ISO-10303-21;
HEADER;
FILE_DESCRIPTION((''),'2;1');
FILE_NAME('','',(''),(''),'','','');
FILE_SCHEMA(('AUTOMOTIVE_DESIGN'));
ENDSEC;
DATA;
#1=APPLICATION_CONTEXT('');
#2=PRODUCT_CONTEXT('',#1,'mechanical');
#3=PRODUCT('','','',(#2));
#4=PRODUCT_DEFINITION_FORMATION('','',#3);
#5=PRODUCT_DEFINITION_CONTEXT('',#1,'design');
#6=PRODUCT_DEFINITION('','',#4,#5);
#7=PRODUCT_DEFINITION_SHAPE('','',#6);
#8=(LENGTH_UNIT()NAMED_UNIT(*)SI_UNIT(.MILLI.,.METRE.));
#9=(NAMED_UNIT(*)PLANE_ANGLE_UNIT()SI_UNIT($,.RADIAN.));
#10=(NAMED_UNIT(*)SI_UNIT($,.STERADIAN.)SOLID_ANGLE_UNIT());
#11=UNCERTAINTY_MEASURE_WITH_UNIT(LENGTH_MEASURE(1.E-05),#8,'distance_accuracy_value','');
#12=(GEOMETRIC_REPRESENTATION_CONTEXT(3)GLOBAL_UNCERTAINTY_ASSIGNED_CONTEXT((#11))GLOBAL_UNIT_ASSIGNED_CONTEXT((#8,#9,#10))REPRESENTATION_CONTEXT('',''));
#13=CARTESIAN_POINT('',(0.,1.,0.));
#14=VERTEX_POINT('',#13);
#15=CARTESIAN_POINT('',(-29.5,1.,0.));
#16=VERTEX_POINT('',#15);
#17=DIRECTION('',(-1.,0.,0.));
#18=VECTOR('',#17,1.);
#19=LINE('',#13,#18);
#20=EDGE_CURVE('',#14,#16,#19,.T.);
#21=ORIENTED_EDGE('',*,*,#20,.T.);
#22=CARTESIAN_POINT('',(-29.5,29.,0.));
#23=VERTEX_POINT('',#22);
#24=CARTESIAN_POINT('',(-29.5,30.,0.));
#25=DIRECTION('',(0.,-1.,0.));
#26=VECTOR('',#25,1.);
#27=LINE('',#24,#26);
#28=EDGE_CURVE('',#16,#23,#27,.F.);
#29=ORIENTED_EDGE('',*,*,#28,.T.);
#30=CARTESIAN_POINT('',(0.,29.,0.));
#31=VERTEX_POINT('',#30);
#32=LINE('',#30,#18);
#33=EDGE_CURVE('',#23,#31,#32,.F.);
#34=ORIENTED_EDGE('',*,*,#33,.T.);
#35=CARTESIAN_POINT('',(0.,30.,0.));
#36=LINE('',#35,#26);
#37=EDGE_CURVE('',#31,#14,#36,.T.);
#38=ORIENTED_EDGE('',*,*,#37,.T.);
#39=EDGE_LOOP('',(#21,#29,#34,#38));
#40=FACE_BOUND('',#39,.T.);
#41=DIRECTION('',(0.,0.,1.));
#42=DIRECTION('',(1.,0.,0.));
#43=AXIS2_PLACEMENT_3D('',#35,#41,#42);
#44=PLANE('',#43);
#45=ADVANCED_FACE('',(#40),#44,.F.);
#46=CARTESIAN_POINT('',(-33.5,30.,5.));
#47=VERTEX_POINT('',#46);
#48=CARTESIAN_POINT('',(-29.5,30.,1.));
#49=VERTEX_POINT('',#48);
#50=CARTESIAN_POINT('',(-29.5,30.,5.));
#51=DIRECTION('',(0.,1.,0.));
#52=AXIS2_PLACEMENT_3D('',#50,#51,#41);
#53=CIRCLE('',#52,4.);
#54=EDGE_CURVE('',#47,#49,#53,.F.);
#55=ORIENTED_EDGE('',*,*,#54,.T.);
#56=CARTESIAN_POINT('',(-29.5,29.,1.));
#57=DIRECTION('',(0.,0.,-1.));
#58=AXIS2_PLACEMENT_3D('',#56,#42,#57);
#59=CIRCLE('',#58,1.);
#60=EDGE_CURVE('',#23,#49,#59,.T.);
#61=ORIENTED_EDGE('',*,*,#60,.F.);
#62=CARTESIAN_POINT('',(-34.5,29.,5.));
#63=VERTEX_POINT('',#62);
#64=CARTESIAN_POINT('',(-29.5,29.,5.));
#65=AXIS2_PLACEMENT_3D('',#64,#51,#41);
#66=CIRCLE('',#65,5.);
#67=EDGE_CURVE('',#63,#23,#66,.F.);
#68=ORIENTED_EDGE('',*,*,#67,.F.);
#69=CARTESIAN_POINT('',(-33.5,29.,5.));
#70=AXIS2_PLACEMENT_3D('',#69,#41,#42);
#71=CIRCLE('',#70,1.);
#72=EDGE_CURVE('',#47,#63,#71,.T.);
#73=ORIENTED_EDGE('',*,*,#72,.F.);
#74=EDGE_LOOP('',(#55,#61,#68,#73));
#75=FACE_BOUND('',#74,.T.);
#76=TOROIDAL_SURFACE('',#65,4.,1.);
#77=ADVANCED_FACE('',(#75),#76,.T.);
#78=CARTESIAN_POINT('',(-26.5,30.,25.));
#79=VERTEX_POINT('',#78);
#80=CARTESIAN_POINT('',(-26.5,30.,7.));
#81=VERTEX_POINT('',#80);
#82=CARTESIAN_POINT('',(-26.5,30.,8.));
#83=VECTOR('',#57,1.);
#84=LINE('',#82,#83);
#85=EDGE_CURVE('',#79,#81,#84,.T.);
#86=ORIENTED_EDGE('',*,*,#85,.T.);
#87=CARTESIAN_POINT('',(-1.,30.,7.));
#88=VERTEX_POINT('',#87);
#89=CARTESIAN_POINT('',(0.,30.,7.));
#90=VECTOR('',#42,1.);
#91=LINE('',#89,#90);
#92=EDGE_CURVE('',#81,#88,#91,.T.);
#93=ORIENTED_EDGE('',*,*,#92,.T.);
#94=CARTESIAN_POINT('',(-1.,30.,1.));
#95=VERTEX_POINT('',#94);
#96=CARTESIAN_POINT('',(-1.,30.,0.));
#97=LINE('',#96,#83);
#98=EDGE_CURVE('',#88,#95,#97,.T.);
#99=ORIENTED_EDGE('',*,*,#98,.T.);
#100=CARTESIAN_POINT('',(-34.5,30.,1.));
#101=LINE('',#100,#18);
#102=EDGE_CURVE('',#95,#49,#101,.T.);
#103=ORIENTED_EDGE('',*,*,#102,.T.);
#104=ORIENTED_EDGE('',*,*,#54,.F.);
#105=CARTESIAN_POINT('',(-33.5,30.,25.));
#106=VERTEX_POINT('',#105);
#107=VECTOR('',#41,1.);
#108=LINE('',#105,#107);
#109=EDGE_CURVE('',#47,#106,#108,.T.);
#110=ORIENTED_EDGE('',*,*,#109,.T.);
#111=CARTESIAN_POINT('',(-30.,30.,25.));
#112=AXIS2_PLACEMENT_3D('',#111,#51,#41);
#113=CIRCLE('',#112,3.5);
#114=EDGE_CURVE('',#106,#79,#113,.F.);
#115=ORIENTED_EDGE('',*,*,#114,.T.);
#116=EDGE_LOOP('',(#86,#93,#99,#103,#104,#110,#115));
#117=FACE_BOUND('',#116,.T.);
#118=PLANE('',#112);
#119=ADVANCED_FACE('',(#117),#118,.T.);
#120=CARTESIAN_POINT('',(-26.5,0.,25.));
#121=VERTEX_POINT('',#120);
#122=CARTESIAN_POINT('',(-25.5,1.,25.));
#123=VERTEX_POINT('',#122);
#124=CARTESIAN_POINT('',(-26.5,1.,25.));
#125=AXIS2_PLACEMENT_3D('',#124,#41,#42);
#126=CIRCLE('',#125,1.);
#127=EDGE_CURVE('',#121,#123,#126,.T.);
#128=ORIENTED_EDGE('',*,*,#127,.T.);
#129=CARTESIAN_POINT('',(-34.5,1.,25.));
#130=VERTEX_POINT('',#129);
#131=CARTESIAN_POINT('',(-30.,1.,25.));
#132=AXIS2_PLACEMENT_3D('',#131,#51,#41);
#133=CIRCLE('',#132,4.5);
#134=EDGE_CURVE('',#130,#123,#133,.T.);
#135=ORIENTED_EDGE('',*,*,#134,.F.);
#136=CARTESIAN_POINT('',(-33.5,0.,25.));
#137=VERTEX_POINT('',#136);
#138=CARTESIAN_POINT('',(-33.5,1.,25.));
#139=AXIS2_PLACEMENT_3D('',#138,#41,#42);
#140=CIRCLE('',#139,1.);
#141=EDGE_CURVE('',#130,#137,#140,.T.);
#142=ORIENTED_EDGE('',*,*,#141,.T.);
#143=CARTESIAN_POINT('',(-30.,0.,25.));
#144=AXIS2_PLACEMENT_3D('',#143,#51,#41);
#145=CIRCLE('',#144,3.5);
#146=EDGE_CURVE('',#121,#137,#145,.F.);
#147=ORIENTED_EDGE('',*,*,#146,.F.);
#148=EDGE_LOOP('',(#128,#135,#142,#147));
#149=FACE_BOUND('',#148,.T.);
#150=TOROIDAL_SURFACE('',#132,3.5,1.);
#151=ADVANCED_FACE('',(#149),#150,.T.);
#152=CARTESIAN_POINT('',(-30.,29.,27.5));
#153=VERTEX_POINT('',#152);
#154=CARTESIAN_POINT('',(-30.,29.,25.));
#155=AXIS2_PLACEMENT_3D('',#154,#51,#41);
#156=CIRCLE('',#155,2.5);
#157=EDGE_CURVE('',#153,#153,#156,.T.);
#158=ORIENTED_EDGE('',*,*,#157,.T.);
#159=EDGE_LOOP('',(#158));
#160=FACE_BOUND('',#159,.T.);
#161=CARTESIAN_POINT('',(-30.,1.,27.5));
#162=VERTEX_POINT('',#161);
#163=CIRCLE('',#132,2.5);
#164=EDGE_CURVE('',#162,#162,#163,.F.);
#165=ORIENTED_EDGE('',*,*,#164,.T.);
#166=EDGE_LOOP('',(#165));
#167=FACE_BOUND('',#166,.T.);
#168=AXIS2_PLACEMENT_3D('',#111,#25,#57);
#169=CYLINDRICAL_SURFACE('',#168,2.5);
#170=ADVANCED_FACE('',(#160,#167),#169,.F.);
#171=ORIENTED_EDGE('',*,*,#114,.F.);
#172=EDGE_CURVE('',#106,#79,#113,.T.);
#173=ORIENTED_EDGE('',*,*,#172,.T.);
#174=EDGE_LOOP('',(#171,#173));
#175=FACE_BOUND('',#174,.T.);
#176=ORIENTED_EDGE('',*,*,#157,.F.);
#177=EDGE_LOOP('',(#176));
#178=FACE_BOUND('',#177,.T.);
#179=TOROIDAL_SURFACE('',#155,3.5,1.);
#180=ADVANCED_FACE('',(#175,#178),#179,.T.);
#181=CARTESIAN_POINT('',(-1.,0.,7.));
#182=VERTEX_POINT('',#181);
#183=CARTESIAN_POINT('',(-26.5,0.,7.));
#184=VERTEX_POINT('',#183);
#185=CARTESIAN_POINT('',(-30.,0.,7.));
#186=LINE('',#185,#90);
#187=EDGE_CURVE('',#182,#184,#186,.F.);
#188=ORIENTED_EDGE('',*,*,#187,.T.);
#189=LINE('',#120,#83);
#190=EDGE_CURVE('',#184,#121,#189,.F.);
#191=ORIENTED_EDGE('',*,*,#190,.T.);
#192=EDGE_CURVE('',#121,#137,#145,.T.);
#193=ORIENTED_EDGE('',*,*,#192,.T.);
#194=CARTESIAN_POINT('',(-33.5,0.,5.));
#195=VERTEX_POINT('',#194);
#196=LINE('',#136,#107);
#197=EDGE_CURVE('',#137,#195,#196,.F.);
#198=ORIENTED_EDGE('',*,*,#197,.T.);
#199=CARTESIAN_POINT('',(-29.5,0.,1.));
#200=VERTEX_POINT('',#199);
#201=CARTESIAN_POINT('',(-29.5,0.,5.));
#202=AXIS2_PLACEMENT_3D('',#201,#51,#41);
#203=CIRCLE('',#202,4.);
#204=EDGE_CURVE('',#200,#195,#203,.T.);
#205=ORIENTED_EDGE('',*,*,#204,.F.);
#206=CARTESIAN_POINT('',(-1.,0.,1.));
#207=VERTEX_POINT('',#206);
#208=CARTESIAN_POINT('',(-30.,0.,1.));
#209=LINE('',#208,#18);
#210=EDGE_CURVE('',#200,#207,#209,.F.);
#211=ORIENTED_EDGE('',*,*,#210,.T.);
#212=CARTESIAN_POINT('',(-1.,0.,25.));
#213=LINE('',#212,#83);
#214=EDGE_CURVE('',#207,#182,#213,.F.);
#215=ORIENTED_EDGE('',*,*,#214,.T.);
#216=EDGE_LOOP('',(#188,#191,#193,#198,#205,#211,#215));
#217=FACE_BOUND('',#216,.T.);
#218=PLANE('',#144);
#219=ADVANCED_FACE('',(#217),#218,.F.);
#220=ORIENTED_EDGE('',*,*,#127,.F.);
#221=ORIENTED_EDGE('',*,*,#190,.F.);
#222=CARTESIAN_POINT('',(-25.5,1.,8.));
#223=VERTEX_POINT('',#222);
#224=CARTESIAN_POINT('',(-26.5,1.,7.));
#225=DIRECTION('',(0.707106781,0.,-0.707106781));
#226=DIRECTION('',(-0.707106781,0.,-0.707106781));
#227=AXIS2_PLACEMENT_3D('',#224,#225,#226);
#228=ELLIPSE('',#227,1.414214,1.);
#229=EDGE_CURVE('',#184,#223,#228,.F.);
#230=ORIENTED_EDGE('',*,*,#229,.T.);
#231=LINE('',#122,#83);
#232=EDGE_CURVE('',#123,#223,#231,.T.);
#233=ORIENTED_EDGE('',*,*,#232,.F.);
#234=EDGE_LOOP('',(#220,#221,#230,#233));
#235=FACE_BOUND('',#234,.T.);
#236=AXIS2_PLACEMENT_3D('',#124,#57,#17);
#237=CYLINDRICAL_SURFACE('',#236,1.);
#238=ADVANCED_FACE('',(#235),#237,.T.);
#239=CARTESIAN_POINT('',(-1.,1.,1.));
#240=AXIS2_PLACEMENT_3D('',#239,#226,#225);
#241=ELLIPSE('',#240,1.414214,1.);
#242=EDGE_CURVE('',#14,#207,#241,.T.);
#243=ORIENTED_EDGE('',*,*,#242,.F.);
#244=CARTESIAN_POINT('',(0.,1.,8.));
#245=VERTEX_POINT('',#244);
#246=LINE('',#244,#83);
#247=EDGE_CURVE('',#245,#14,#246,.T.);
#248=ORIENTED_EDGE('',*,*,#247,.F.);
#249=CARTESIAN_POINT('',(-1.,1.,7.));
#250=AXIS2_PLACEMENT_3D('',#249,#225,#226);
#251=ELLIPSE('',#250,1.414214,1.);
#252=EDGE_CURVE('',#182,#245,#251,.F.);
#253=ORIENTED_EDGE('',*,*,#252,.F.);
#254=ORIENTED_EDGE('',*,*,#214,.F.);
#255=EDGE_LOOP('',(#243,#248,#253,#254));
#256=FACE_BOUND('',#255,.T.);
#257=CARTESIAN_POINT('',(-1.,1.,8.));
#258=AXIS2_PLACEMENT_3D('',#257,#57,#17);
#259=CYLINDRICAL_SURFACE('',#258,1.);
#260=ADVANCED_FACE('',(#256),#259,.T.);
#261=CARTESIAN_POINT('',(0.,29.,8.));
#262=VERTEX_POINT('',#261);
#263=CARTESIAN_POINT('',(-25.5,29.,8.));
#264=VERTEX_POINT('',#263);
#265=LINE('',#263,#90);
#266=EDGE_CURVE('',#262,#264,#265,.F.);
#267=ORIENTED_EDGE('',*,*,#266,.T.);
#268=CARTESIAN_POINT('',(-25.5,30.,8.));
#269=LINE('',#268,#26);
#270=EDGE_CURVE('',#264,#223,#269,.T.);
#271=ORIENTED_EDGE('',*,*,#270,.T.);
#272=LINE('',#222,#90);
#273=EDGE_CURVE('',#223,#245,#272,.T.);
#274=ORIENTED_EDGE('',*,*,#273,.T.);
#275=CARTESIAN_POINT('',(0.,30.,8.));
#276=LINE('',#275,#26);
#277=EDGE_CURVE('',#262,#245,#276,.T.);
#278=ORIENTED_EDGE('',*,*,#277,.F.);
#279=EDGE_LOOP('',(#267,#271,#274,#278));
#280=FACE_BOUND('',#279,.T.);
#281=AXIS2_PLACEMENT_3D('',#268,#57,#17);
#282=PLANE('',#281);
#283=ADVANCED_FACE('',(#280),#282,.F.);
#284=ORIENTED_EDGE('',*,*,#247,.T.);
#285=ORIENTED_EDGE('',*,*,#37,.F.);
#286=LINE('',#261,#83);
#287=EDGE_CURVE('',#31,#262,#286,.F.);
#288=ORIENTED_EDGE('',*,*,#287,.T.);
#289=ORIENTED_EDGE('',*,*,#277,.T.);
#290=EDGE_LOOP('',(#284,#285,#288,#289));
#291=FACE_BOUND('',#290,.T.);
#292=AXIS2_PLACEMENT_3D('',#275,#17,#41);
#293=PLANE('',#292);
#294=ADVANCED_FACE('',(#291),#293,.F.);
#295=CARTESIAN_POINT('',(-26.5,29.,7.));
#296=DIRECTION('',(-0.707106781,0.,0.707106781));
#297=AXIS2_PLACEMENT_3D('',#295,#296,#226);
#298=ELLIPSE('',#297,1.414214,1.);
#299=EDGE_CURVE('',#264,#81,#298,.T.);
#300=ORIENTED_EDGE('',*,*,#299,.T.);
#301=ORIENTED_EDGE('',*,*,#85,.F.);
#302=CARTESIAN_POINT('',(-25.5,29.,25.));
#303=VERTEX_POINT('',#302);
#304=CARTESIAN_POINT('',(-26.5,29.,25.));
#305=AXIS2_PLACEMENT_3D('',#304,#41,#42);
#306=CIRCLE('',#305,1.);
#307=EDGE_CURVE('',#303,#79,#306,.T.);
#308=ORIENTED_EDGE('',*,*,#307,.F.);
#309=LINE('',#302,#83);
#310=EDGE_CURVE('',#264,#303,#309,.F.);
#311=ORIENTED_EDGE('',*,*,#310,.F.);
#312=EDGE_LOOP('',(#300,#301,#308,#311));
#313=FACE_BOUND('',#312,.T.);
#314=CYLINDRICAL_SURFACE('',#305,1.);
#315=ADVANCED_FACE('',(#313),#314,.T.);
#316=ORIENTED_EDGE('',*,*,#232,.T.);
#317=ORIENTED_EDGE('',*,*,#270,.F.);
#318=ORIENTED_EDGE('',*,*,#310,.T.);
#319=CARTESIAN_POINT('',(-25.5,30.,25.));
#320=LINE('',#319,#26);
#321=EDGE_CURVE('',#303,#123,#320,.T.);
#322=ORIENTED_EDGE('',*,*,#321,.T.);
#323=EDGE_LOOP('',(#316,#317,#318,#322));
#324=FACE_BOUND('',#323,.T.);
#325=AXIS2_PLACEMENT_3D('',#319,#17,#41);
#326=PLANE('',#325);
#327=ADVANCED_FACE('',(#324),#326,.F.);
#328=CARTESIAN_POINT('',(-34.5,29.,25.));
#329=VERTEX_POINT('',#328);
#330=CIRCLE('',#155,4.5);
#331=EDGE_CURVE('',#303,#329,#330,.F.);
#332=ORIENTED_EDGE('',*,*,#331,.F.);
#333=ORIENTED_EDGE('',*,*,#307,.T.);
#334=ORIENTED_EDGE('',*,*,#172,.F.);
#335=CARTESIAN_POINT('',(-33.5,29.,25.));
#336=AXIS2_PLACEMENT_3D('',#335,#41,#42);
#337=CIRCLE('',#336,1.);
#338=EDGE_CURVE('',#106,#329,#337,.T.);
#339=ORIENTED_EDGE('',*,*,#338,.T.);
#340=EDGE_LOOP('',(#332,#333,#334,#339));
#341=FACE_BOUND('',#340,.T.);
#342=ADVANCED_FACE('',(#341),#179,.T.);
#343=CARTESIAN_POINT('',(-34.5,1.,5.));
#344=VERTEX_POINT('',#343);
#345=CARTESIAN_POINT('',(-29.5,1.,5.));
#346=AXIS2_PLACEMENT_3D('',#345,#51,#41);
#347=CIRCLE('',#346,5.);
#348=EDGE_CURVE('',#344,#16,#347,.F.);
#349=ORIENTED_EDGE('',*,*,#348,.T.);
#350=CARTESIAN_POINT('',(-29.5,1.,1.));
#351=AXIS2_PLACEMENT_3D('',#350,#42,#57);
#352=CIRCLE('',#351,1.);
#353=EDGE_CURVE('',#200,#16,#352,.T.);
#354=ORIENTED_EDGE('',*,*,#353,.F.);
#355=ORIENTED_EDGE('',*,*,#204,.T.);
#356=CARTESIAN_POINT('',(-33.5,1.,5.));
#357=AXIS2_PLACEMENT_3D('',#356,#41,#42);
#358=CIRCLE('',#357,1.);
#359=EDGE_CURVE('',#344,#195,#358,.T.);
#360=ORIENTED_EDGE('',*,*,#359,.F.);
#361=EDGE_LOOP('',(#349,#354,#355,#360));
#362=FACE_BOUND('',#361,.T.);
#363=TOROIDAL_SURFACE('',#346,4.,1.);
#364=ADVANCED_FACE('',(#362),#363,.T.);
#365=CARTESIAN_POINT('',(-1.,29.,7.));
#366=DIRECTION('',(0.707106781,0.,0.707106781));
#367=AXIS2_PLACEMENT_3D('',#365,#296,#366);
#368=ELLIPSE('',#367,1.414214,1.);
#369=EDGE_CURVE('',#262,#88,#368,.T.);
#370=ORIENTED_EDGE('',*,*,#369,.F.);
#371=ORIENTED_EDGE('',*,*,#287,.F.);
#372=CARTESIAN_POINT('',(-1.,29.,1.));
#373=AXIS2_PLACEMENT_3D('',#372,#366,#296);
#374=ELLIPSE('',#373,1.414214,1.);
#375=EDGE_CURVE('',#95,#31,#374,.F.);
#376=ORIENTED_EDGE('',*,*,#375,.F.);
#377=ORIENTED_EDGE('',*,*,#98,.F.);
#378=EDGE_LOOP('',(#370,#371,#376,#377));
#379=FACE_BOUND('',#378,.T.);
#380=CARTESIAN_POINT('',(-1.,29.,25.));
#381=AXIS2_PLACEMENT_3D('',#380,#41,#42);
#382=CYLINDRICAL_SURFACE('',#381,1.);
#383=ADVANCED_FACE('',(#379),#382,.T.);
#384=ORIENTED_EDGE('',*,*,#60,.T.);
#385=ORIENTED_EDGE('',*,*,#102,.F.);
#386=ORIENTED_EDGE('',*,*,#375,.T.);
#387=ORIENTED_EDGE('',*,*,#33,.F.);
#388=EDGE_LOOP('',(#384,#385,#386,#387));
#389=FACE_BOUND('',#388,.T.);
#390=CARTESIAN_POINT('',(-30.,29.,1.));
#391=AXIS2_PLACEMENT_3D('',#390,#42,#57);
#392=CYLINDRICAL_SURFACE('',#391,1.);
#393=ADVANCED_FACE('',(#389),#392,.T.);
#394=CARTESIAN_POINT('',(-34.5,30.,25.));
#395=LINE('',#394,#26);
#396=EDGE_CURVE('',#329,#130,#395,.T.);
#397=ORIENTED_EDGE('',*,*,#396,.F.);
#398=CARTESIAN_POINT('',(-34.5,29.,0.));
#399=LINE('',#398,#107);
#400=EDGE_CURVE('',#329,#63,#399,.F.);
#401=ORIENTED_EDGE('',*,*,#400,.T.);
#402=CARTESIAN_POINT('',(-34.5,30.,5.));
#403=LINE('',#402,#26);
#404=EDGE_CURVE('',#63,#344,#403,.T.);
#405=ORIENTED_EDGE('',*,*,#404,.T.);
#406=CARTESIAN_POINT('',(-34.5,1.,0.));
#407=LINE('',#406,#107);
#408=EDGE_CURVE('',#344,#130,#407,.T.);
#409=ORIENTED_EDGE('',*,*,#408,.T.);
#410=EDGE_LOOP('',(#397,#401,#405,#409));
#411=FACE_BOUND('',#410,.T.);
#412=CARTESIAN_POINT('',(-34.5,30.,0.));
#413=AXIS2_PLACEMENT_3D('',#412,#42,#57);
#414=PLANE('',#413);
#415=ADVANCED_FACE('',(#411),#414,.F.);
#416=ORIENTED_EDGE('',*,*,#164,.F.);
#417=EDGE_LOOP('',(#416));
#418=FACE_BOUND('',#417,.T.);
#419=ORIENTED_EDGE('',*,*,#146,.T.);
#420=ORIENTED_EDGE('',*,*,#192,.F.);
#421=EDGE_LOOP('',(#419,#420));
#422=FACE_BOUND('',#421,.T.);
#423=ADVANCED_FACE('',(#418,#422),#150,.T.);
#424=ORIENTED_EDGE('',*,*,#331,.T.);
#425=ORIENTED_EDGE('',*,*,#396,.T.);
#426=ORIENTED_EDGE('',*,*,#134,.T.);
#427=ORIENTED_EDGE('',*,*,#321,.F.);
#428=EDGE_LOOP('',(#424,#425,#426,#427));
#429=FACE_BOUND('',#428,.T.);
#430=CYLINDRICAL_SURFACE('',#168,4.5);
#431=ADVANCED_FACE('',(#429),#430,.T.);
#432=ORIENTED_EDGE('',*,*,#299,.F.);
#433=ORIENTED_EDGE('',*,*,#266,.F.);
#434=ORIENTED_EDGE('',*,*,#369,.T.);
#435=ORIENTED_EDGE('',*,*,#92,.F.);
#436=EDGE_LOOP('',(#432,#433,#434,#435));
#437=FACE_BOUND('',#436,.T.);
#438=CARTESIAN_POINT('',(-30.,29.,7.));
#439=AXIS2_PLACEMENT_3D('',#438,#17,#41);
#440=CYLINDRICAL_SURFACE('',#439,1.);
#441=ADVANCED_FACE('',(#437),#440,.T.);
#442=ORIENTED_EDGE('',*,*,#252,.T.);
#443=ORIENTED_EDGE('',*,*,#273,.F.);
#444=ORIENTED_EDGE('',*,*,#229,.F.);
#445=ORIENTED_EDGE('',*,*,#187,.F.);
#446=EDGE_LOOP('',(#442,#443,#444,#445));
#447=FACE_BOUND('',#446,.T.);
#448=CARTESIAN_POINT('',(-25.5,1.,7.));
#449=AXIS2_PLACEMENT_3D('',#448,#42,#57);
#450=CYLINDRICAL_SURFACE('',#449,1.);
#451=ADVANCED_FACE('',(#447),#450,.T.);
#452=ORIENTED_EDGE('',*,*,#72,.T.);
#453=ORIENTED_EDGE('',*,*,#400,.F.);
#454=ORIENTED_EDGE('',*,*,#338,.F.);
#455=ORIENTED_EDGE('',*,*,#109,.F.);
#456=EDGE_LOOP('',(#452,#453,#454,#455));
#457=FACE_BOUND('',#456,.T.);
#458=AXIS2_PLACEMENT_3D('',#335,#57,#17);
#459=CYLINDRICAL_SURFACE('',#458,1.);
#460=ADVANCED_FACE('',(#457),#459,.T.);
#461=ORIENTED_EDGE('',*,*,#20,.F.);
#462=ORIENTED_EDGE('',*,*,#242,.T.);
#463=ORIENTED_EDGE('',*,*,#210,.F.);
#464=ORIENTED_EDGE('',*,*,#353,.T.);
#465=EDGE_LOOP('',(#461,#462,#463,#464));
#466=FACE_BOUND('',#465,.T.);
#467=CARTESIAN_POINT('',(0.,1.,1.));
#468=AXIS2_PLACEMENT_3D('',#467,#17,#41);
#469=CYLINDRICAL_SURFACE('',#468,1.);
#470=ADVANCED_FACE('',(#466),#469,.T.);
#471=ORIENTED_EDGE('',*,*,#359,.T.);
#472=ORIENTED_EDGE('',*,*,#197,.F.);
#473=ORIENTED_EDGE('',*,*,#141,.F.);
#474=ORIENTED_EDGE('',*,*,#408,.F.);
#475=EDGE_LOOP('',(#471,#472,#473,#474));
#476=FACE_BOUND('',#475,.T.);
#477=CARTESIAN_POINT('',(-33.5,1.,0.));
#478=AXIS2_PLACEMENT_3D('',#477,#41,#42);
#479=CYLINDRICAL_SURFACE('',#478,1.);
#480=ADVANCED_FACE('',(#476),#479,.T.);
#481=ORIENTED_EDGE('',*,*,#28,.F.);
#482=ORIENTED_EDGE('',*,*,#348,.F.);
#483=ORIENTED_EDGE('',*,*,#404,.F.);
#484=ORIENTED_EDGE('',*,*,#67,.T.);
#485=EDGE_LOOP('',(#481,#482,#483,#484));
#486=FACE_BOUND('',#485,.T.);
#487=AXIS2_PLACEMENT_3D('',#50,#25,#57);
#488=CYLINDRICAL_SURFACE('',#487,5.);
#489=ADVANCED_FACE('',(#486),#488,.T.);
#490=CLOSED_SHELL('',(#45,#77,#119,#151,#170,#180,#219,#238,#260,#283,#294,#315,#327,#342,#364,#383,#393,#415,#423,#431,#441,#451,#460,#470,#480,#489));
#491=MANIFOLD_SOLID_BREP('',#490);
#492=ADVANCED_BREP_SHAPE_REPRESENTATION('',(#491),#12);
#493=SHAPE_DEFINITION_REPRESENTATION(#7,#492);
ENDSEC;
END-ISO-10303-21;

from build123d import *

# Parameters (mm, degrees)
SKETCH1_R           = 2.5
BOSS_EXTRUDE1_DEPTH = 30
FILLET1_R           = 1
FILLET2_R           = 5


# Some blends are built 0.0001 mm under size
with BuildPart() as part:
    # Sketch1 → Boss-Extrude1 (new body)
    with BuildSketch(Plane(origin=(0, 0, 0), x_dir=(1, 0, 0), z_dir=(0, 1, 0))):
        with BuildLine():
            Line((0, 0), (-34.5, 0))
            Line((-34.5, 0), (-34.5, -25))
            ThreePointArc((-34.5, -25), (-30, -29.5), (-25.5, -25))
            Line((-25.5, -25), (-25.5, -8))
            Line((-25.5, -8), (0, -8))
            Line((0, -8), (0, 0))
        make_face()
        with Locations(Location((-30, -25, 0), (0, 0, 270))):
            Circle(SKETCH1_R, mode=Mode.SUBTRACT)
    extrude(amount=BOSS_EXTRUDE1_DEPTH)

    # Fillet1
    fillet1_edges = [part.edges().sort_by_distance(p)[0] for p in [
        (-34.5, 30, 12.5),
        (-30, 30, 29.5),
        (-30, 0, 22.5),
        (-30, 30, 22.5),
        (-25.5, 30, 16.5),
        (-12.75, 30, 8),
        (0, 30, 4),
        (-12.75, 0, 8),
        (-25.5, 0, 16.5),
        (-30, 0, 29.5),
        (-34.5, 0, 12.5),
        (-17.25, 0, 0),
        (0, 0, 4),
        (-17.25, 30, 0),
    ]]
    fillet(fillet1_edges, radius=FILLET1_R - 0.0001)  # a hair under: the kernel refuses the full size

    # Fillet2
    # the kernel refuses this fillet: 5 mm, written as the material it takes off along each edge
    with BuildSketch(Plane(origin=(-29.5, 0, 5), x_dir=(-1, 0, 0), z_dir=(0, 0, 1))) as fillet2_piece_1:
        with BuildLine():
            CenterArc((4.0001, -0.9999), 0.9999, 0, 90)
            Line((5, -0.9999), (5, 0))
            Line((5, 0), (4.0001, 0))
        make_face()
    revolve(axis=Axis((-29.5, 0, 5), (0, -1, 0)), revolution_arc=90, mode=Mode.SUBTRACT)
    with BuildSketch(Plane(origin=(-29.5, 30, 5), x_dir=(0, 0, -1), z_dir=(1, 0, 0))) as fillet2_piece_2:
        with BuildLine():
            CenterArc((4.0001, -0.9999), 0.9999, 0, 90)
            Line((5, -0.9999), (5, 0))
            Line((5, 0), (4.0001, 0))
        make_face()
    revolve(axis=Axis((-29.5, 30, 5), (0, 1, 0)), revolution_arc=90, mode=Mode.SUBTRACT)
    with BuildSketch(Plane(origin=(-34.5, 0, 0), x_dir=(1, 0, 0), z_dir=(0, 1, 0))) as fillet2_piece_3:
        with BuildLine():
            CenterArc((FILLET2_R, -FILLET2_R), FILLET2_R, 90, 90)
            Line((0, -FILLET2_R), (0, 0))
            Line((0, 0), (FILLET2_R, 0))
        make_face()
    extrude(amount=30, mode=Mode.SUBTRACT)


solid = part.part
